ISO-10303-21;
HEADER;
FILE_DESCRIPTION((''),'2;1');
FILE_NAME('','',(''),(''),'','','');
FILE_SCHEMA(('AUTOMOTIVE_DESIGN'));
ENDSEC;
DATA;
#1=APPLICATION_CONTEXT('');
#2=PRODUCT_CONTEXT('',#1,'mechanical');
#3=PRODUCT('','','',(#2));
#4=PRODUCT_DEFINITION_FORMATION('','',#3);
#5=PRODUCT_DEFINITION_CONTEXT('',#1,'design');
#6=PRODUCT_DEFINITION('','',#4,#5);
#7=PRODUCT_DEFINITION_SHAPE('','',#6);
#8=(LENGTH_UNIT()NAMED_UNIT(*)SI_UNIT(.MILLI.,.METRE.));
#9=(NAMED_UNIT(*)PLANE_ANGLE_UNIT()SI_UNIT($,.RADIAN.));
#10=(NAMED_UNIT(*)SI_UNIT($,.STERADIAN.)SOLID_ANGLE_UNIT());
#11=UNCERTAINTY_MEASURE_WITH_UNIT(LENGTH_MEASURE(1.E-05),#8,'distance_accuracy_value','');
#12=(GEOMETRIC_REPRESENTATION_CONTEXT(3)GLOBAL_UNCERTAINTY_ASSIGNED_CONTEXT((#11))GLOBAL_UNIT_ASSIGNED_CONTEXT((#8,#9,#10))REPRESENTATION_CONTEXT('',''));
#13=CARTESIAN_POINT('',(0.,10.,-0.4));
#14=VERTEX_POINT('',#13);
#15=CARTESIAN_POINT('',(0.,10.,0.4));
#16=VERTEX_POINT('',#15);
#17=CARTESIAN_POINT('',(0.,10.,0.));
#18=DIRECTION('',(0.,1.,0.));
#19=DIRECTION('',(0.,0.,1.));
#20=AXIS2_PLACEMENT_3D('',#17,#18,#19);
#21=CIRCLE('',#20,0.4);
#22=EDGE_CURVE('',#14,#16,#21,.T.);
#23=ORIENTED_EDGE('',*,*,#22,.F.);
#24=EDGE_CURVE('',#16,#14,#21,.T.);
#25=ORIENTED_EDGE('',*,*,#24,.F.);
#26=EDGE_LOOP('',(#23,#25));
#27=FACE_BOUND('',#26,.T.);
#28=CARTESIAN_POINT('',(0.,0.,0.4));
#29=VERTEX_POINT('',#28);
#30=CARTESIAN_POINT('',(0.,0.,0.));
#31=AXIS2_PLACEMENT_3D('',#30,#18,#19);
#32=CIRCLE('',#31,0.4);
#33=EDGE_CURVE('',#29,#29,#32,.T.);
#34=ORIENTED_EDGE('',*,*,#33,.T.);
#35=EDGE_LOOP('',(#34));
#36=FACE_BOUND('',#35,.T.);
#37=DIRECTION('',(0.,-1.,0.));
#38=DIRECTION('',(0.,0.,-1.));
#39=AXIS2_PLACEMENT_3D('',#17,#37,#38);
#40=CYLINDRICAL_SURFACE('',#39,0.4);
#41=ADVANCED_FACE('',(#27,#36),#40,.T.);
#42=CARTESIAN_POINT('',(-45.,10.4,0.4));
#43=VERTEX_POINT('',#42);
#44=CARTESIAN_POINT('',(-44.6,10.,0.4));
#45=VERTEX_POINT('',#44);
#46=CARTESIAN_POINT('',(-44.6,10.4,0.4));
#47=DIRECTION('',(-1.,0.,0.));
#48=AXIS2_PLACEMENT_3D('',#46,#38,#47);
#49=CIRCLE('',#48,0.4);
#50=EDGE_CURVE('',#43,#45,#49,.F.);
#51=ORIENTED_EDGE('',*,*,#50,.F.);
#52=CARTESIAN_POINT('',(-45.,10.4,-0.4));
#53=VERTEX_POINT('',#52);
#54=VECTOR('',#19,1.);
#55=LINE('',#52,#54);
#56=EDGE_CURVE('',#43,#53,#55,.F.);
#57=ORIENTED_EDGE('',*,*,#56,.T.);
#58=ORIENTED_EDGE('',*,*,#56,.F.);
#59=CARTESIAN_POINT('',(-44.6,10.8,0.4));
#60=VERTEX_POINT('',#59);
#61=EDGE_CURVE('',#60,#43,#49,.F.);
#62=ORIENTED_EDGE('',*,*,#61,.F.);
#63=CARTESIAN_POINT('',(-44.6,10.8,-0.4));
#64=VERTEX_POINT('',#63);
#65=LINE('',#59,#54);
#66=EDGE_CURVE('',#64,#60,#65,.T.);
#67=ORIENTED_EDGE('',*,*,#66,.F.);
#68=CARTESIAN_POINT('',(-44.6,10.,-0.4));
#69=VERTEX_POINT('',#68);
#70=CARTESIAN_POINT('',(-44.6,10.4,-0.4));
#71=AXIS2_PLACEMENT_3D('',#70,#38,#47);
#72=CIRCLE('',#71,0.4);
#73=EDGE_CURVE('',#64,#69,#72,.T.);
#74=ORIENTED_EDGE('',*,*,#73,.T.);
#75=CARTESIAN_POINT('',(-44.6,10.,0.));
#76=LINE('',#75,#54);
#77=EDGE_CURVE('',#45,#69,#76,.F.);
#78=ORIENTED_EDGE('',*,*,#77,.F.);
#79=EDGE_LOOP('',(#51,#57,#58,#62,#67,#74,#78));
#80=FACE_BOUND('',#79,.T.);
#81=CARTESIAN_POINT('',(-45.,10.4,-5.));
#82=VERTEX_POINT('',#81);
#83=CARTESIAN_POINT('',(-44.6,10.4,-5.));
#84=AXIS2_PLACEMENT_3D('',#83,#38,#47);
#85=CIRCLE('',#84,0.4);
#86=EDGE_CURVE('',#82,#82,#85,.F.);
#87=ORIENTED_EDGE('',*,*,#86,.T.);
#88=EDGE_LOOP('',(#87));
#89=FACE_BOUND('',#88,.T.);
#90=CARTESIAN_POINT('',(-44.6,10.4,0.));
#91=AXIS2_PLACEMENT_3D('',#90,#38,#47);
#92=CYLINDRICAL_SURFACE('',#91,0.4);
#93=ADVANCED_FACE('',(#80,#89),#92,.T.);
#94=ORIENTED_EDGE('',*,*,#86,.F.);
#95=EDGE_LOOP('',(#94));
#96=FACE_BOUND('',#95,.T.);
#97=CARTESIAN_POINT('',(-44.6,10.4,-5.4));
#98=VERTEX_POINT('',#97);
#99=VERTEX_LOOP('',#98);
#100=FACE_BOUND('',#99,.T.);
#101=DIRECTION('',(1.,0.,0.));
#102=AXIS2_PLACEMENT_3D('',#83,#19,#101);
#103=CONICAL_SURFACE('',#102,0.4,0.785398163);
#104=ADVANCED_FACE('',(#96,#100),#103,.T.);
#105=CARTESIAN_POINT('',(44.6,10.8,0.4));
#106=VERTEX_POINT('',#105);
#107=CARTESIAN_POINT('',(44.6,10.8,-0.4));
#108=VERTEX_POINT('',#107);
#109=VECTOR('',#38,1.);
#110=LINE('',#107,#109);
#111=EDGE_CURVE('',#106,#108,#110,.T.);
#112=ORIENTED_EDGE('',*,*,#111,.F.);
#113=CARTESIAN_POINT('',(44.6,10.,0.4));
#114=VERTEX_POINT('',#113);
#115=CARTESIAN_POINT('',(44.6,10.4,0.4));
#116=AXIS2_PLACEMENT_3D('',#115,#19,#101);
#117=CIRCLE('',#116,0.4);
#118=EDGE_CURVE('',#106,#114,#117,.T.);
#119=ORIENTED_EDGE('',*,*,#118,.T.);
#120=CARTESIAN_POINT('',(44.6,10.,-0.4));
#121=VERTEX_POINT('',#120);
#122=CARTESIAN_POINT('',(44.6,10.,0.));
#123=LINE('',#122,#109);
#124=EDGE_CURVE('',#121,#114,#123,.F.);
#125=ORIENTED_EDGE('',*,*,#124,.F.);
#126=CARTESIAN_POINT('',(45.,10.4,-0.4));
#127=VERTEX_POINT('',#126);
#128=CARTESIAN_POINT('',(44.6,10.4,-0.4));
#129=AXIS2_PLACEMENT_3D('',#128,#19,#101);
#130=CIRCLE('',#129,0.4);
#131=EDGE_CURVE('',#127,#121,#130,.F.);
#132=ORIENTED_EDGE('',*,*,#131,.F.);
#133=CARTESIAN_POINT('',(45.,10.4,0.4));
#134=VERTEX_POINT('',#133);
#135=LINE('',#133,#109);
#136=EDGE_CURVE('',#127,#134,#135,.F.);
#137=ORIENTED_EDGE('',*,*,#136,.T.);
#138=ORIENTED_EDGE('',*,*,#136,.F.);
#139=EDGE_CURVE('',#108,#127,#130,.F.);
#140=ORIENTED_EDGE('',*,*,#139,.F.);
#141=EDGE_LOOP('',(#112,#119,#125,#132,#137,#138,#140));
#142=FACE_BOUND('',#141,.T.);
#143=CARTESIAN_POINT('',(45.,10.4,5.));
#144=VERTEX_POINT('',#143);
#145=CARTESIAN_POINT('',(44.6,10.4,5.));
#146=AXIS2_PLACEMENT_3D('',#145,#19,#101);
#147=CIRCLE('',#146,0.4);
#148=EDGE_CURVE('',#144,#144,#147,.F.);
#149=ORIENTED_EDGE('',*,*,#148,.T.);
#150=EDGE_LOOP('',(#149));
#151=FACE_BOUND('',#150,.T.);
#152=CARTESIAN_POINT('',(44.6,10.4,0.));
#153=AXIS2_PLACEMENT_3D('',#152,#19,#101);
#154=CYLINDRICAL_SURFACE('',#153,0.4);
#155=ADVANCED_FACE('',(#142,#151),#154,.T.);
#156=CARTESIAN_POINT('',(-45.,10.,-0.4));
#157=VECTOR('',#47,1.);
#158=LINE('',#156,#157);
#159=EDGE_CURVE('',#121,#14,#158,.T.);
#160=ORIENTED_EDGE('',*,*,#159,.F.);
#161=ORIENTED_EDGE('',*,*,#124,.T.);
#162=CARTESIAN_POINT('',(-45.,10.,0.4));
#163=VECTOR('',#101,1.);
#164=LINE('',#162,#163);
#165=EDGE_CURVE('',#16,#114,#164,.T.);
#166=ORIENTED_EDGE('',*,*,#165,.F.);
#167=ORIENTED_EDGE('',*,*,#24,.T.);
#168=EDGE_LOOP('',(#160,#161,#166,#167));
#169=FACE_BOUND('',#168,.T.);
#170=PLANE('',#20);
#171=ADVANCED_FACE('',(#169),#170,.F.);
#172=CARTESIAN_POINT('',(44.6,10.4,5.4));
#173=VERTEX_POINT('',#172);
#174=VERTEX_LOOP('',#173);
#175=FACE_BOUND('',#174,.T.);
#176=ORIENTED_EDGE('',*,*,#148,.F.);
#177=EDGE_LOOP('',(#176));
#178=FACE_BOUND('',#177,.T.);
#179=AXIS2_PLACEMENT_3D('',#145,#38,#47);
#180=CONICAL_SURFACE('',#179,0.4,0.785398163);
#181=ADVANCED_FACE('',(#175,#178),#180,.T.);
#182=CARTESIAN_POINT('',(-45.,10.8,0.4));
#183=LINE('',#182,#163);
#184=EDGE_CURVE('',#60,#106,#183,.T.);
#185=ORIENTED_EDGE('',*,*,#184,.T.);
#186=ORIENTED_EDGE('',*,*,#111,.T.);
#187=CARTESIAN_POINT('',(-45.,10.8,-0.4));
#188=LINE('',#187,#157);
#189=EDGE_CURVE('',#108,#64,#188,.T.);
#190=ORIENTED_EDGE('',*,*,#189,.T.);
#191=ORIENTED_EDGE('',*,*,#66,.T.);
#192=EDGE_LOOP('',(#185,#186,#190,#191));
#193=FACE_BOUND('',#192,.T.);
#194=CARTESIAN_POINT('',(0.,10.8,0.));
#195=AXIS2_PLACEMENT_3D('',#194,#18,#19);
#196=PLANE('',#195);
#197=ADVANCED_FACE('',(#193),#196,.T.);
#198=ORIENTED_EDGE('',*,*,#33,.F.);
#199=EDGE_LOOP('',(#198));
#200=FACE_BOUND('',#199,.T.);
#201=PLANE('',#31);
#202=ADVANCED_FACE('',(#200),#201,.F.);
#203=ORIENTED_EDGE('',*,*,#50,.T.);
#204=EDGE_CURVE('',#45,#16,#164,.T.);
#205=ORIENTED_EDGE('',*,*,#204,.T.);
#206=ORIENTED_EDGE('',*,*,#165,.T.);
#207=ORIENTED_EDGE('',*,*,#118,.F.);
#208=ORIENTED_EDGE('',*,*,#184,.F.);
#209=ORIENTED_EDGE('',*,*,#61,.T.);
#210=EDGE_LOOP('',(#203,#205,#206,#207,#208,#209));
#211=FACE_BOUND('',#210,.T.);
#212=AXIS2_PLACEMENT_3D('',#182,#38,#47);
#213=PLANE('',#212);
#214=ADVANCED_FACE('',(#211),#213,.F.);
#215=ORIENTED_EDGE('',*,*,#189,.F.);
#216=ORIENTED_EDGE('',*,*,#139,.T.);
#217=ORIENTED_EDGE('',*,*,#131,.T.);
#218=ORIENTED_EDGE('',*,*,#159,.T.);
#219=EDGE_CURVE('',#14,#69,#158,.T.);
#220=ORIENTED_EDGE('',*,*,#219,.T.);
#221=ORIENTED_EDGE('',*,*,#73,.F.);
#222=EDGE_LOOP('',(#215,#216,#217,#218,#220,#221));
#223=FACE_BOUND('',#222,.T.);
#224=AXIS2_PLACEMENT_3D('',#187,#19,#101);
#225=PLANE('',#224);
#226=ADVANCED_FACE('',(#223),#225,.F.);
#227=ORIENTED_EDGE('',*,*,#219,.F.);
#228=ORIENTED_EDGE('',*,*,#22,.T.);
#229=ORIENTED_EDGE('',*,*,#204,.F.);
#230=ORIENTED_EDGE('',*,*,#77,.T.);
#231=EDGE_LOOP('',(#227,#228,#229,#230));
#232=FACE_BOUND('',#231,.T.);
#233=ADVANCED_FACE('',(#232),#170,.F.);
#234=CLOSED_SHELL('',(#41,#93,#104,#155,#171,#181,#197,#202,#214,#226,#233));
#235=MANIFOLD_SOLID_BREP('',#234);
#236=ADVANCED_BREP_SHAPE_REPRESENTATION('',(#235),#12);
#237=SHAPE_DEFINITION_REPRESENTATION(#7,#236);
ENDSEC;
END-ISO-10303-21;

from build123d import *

# Parameters (mm, degrees)
SKETCH_1_R      = 0.4
EXTRUDE_1_DEPTH = 10
SKETCH_2_W      = 90
SKETCH_2_H      = 0.8
EXTRUDE_2_DEPTH = 0.8
FILLET_1_R      = 0.4
SKETCH_3_R      = 0.4
EXTRUDE_3_DEPTH = 5
SKETCH_4_R      = 0.4
EXTRUDE_4_DEPTH = 5
CHAMFER_1_SIZE  = 0.4


with BuildPart() as part:
    # 草图1 → 凸台-拉伸1 (new body)
    with BuildSketch(Plane(origin=(0, 0, 0), x_dir=(1, 0, 0), z_dir=(0, 1, 0))):
        with Locations(Location((0, 0, 0), (0, 0, 270))):
            Circle(SKETCH_1_R)
    extrude(amount=EXTRUDE_1_DEPTH)

    # 草图2 → 凸台-拉伸2 (add)
    with BuildSketch(Plane(origin=(0, 10, 0), x_dir=(1, 0, 0), z_dir=(0, 1, 0))):
        Rectangle(SKETCH_2_W, SKETCH_2_H)
    extrude(amount=EXTRUDE_2_DEPTH)

    # 圆角1
    fillet_1_edges = [part.edges().sort_by_distance(p)[0] for p in [
        (45, 10, 0),
        (45, 10.8, 0),
        (-45, 10, 0),
        (-45, 10.8, 0),
    ]]
    fillet(fillet_1_edges, radius=FILLET_1_R - 0.0001)  # a hair under: the kernel refuses the full size

    # 草图3 → 凸台-拉伸3 (add)
    with BuildSketch(Plane.XY.offset(0.4)):
        with Locations((44.6, 10.4)):
            Circle(SKETCH_3_R)
    extrude(amount=EXTRUDE_3_DEPTH)

    # 草图4 → 凸台-拉伸4 (add)
    with BuildSketch(Plane(origin=(0, 0, -0.4), x_dir=(-1, 0, 0), z_dir=(0, 0, -1))):
        with Locations((44.6, 10.4)):
            Circle(SKETCH_4_R)
    extrude(amount=EXTRUDE_4_DEPTH)

    # 倒角1
    chamfer_1_edges = [part.edges().sort_by_distance(p)[0] for p in [
        (44.2, 10.4, 5.4),
        (-44.2, 10.4, -5.4),
    ]]
    chamfer(chamfer_1_edges, length=CHAMFER_1_SIZE)


solid = part.part
